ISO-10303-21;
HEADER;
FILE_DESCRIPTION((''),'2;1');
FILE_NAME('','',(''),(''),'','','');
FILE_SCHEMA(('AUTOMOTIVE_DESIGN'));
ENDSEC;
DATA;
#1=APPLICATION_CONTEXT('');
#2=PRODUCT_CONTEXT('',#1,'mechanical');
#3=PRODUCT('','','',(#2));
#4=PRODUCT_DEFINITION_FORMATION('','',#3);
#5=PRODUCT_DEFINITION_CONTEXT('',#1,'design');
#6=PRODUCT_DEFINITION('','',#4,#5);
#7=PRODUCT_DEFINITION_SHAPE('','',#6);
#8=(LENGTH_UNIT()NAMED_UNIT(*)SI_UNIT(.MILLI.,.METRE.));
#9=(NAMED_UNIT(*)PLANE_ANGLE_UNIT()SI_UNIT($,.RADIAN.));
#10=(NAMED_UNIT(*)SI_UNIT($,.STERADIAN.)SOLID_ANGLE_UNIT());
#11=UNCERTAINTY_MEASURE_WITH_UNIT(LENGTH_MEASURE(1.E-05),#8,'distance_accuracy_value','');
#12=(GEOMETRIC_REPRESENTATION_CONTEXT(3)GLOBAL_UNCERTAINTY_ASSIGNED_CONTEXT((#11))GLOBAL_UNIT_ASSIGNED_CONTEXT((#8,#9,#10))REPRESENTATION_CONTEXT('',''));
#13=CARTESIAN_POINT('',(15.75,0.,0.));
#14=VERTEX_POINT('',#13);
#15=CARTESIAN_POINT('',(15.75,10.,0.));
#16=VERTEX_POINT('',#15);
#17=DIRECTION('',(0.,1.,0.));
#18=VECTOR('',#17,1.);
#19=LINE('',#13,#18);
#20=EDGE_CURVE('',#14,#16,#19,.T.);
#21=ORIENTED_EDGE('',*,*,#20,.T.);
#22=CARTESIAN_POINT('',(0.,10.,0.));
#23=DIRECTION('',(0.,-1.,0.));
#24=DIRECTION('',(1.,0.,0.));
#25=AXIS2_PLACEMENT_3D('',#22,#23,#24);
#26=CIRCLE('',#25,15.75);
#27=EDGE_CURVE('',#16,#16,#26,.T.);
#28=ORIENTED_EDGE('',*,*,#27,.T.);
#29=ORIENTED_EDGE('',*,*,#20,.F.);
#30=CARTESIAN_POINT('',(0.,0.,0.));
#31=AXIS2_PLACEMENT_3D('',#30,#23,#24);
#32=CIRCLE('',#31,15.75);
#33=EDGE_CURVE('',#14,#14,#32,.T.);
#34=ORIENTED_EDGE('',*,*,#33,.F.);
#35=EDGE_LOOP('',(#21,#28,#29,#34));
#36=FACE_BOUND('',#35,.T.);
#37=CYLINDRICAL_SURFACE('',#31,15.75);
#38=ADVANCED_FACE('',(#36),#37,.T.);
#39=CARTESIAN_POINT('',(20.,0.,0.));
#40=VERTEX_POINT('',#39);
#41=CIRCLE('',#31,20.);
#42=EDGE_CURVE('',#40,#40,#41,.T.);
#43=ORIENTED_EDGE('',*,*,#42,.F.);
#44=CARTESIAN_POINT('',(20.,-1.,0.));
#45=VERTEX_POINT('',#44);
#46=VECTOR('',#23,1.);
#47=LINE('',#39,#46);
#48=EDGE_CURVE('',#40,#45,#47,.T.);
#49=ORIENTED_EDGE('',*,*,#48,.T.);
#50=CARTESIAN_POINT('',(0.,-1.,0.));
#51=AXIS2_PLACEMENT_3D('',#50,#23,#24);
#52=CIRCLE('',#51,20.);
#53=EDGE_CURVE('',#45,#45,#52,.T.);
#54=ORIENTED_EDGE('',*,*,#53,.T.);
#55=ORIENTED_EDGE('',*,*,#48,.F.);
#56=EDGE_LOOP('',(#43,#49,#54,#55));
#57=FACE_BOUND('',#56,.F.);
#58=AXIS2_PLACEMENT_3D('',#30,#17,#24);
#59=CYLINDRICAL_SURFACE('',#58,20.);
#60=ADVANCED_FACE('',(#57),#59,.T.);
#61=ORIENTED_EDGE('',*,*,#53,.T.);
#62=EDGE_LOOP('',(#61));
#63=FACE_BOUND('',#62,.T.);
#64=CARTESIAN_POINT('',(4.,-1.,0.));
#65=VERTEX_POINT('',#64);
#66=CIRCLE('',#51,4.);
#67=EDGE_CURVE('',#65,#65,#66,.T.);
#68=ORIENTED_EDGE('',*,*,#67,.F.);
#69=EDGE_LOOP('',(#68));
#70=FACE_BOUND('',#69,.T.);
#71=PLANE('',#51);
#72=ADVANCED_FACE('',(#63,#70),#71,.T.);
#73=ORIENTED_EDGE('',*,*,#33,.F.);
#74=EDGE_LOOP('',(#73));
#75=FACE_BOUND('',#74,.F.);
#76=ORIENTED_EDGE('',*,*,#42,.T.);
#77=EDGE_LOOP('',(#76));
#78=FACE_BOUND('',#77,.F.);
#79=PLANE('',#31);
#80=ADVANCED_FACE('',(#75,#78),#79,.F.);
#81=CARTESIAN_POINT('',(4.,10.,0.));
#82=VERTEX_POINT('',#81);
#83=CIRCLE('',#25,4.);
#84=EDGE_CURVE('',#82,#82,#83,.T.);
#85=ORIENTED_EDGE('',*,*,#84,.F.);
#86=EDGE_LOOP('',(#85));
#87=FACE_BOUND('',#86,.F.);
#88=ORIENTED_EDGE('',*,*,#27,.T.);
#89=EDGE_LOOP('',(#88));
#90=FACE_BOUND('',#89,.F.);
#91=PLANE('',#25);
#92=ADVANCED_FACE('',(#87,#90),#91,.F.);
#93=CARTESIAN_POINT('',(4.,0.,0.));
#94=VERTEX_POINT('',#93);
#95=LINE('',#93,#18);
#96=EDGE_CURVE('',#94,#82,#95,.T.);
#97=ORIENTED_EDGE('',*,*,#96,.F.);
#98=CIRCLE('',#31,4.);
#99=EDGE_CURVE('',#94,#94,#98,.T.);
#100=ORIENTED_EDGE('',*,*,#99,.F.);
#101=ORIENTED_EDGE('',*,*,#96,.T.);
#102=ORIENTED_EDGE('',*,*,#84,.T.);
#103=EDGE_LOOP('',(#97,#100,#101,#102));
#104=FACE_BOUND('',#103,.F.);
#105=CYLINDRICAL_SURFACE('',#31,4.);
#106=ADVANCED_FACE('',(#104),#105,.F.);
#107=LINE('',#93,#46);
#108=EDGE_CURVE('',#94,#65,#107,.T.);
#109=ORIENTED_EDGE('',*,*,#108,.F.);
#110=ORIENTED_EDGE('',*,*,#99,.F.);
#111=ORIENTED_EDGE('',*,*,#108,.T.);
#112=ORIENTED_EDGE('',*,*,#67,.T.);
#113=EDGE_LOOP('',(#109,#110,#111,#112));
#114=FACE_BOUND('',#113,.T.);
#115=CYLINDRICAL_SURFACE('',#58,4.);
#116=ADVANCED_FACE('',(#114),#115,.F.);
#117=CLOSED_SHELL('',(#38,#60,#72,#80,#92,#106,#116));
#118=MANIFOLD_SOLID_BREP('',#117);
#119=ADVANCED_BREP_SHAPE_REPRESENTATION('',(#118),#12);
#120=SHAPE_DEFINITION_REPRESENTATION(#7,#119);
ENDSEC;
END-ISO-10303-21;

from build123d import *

# Parameters (mm, degrees)
F0_R     = 20
F0_R_2   = 15.75
F0_R_3   = 4
F1_DEPTH = 1
F2_DEPTH = 10


# Not quite as in the source:
# - a feature names something its author has since deleted; it is built from what else it names


with BuildPart() as f1:
    # F0 (on Front) → F1 (new body)
    with BuildSketch(Plane.XZ):
        Circle(F0_R)
        Circle(F0_R_2, mode=Mode.SUBTRACT)
        Circle(F0_R_2)
        Circle(F0_R_3, mode=Mode.SUBTRACT)
    extrude(amount=F1_DEPTH)

    # F0 (on Front) → F2 (join)
    with BuildSketch(Plane.XZ):
        Circle(F0_R_2)
        Circle(F0_R_3, mode=Mode.SUBTRACT)
    extrude(amount=-F2_DEPTH)


solid = f1.part
